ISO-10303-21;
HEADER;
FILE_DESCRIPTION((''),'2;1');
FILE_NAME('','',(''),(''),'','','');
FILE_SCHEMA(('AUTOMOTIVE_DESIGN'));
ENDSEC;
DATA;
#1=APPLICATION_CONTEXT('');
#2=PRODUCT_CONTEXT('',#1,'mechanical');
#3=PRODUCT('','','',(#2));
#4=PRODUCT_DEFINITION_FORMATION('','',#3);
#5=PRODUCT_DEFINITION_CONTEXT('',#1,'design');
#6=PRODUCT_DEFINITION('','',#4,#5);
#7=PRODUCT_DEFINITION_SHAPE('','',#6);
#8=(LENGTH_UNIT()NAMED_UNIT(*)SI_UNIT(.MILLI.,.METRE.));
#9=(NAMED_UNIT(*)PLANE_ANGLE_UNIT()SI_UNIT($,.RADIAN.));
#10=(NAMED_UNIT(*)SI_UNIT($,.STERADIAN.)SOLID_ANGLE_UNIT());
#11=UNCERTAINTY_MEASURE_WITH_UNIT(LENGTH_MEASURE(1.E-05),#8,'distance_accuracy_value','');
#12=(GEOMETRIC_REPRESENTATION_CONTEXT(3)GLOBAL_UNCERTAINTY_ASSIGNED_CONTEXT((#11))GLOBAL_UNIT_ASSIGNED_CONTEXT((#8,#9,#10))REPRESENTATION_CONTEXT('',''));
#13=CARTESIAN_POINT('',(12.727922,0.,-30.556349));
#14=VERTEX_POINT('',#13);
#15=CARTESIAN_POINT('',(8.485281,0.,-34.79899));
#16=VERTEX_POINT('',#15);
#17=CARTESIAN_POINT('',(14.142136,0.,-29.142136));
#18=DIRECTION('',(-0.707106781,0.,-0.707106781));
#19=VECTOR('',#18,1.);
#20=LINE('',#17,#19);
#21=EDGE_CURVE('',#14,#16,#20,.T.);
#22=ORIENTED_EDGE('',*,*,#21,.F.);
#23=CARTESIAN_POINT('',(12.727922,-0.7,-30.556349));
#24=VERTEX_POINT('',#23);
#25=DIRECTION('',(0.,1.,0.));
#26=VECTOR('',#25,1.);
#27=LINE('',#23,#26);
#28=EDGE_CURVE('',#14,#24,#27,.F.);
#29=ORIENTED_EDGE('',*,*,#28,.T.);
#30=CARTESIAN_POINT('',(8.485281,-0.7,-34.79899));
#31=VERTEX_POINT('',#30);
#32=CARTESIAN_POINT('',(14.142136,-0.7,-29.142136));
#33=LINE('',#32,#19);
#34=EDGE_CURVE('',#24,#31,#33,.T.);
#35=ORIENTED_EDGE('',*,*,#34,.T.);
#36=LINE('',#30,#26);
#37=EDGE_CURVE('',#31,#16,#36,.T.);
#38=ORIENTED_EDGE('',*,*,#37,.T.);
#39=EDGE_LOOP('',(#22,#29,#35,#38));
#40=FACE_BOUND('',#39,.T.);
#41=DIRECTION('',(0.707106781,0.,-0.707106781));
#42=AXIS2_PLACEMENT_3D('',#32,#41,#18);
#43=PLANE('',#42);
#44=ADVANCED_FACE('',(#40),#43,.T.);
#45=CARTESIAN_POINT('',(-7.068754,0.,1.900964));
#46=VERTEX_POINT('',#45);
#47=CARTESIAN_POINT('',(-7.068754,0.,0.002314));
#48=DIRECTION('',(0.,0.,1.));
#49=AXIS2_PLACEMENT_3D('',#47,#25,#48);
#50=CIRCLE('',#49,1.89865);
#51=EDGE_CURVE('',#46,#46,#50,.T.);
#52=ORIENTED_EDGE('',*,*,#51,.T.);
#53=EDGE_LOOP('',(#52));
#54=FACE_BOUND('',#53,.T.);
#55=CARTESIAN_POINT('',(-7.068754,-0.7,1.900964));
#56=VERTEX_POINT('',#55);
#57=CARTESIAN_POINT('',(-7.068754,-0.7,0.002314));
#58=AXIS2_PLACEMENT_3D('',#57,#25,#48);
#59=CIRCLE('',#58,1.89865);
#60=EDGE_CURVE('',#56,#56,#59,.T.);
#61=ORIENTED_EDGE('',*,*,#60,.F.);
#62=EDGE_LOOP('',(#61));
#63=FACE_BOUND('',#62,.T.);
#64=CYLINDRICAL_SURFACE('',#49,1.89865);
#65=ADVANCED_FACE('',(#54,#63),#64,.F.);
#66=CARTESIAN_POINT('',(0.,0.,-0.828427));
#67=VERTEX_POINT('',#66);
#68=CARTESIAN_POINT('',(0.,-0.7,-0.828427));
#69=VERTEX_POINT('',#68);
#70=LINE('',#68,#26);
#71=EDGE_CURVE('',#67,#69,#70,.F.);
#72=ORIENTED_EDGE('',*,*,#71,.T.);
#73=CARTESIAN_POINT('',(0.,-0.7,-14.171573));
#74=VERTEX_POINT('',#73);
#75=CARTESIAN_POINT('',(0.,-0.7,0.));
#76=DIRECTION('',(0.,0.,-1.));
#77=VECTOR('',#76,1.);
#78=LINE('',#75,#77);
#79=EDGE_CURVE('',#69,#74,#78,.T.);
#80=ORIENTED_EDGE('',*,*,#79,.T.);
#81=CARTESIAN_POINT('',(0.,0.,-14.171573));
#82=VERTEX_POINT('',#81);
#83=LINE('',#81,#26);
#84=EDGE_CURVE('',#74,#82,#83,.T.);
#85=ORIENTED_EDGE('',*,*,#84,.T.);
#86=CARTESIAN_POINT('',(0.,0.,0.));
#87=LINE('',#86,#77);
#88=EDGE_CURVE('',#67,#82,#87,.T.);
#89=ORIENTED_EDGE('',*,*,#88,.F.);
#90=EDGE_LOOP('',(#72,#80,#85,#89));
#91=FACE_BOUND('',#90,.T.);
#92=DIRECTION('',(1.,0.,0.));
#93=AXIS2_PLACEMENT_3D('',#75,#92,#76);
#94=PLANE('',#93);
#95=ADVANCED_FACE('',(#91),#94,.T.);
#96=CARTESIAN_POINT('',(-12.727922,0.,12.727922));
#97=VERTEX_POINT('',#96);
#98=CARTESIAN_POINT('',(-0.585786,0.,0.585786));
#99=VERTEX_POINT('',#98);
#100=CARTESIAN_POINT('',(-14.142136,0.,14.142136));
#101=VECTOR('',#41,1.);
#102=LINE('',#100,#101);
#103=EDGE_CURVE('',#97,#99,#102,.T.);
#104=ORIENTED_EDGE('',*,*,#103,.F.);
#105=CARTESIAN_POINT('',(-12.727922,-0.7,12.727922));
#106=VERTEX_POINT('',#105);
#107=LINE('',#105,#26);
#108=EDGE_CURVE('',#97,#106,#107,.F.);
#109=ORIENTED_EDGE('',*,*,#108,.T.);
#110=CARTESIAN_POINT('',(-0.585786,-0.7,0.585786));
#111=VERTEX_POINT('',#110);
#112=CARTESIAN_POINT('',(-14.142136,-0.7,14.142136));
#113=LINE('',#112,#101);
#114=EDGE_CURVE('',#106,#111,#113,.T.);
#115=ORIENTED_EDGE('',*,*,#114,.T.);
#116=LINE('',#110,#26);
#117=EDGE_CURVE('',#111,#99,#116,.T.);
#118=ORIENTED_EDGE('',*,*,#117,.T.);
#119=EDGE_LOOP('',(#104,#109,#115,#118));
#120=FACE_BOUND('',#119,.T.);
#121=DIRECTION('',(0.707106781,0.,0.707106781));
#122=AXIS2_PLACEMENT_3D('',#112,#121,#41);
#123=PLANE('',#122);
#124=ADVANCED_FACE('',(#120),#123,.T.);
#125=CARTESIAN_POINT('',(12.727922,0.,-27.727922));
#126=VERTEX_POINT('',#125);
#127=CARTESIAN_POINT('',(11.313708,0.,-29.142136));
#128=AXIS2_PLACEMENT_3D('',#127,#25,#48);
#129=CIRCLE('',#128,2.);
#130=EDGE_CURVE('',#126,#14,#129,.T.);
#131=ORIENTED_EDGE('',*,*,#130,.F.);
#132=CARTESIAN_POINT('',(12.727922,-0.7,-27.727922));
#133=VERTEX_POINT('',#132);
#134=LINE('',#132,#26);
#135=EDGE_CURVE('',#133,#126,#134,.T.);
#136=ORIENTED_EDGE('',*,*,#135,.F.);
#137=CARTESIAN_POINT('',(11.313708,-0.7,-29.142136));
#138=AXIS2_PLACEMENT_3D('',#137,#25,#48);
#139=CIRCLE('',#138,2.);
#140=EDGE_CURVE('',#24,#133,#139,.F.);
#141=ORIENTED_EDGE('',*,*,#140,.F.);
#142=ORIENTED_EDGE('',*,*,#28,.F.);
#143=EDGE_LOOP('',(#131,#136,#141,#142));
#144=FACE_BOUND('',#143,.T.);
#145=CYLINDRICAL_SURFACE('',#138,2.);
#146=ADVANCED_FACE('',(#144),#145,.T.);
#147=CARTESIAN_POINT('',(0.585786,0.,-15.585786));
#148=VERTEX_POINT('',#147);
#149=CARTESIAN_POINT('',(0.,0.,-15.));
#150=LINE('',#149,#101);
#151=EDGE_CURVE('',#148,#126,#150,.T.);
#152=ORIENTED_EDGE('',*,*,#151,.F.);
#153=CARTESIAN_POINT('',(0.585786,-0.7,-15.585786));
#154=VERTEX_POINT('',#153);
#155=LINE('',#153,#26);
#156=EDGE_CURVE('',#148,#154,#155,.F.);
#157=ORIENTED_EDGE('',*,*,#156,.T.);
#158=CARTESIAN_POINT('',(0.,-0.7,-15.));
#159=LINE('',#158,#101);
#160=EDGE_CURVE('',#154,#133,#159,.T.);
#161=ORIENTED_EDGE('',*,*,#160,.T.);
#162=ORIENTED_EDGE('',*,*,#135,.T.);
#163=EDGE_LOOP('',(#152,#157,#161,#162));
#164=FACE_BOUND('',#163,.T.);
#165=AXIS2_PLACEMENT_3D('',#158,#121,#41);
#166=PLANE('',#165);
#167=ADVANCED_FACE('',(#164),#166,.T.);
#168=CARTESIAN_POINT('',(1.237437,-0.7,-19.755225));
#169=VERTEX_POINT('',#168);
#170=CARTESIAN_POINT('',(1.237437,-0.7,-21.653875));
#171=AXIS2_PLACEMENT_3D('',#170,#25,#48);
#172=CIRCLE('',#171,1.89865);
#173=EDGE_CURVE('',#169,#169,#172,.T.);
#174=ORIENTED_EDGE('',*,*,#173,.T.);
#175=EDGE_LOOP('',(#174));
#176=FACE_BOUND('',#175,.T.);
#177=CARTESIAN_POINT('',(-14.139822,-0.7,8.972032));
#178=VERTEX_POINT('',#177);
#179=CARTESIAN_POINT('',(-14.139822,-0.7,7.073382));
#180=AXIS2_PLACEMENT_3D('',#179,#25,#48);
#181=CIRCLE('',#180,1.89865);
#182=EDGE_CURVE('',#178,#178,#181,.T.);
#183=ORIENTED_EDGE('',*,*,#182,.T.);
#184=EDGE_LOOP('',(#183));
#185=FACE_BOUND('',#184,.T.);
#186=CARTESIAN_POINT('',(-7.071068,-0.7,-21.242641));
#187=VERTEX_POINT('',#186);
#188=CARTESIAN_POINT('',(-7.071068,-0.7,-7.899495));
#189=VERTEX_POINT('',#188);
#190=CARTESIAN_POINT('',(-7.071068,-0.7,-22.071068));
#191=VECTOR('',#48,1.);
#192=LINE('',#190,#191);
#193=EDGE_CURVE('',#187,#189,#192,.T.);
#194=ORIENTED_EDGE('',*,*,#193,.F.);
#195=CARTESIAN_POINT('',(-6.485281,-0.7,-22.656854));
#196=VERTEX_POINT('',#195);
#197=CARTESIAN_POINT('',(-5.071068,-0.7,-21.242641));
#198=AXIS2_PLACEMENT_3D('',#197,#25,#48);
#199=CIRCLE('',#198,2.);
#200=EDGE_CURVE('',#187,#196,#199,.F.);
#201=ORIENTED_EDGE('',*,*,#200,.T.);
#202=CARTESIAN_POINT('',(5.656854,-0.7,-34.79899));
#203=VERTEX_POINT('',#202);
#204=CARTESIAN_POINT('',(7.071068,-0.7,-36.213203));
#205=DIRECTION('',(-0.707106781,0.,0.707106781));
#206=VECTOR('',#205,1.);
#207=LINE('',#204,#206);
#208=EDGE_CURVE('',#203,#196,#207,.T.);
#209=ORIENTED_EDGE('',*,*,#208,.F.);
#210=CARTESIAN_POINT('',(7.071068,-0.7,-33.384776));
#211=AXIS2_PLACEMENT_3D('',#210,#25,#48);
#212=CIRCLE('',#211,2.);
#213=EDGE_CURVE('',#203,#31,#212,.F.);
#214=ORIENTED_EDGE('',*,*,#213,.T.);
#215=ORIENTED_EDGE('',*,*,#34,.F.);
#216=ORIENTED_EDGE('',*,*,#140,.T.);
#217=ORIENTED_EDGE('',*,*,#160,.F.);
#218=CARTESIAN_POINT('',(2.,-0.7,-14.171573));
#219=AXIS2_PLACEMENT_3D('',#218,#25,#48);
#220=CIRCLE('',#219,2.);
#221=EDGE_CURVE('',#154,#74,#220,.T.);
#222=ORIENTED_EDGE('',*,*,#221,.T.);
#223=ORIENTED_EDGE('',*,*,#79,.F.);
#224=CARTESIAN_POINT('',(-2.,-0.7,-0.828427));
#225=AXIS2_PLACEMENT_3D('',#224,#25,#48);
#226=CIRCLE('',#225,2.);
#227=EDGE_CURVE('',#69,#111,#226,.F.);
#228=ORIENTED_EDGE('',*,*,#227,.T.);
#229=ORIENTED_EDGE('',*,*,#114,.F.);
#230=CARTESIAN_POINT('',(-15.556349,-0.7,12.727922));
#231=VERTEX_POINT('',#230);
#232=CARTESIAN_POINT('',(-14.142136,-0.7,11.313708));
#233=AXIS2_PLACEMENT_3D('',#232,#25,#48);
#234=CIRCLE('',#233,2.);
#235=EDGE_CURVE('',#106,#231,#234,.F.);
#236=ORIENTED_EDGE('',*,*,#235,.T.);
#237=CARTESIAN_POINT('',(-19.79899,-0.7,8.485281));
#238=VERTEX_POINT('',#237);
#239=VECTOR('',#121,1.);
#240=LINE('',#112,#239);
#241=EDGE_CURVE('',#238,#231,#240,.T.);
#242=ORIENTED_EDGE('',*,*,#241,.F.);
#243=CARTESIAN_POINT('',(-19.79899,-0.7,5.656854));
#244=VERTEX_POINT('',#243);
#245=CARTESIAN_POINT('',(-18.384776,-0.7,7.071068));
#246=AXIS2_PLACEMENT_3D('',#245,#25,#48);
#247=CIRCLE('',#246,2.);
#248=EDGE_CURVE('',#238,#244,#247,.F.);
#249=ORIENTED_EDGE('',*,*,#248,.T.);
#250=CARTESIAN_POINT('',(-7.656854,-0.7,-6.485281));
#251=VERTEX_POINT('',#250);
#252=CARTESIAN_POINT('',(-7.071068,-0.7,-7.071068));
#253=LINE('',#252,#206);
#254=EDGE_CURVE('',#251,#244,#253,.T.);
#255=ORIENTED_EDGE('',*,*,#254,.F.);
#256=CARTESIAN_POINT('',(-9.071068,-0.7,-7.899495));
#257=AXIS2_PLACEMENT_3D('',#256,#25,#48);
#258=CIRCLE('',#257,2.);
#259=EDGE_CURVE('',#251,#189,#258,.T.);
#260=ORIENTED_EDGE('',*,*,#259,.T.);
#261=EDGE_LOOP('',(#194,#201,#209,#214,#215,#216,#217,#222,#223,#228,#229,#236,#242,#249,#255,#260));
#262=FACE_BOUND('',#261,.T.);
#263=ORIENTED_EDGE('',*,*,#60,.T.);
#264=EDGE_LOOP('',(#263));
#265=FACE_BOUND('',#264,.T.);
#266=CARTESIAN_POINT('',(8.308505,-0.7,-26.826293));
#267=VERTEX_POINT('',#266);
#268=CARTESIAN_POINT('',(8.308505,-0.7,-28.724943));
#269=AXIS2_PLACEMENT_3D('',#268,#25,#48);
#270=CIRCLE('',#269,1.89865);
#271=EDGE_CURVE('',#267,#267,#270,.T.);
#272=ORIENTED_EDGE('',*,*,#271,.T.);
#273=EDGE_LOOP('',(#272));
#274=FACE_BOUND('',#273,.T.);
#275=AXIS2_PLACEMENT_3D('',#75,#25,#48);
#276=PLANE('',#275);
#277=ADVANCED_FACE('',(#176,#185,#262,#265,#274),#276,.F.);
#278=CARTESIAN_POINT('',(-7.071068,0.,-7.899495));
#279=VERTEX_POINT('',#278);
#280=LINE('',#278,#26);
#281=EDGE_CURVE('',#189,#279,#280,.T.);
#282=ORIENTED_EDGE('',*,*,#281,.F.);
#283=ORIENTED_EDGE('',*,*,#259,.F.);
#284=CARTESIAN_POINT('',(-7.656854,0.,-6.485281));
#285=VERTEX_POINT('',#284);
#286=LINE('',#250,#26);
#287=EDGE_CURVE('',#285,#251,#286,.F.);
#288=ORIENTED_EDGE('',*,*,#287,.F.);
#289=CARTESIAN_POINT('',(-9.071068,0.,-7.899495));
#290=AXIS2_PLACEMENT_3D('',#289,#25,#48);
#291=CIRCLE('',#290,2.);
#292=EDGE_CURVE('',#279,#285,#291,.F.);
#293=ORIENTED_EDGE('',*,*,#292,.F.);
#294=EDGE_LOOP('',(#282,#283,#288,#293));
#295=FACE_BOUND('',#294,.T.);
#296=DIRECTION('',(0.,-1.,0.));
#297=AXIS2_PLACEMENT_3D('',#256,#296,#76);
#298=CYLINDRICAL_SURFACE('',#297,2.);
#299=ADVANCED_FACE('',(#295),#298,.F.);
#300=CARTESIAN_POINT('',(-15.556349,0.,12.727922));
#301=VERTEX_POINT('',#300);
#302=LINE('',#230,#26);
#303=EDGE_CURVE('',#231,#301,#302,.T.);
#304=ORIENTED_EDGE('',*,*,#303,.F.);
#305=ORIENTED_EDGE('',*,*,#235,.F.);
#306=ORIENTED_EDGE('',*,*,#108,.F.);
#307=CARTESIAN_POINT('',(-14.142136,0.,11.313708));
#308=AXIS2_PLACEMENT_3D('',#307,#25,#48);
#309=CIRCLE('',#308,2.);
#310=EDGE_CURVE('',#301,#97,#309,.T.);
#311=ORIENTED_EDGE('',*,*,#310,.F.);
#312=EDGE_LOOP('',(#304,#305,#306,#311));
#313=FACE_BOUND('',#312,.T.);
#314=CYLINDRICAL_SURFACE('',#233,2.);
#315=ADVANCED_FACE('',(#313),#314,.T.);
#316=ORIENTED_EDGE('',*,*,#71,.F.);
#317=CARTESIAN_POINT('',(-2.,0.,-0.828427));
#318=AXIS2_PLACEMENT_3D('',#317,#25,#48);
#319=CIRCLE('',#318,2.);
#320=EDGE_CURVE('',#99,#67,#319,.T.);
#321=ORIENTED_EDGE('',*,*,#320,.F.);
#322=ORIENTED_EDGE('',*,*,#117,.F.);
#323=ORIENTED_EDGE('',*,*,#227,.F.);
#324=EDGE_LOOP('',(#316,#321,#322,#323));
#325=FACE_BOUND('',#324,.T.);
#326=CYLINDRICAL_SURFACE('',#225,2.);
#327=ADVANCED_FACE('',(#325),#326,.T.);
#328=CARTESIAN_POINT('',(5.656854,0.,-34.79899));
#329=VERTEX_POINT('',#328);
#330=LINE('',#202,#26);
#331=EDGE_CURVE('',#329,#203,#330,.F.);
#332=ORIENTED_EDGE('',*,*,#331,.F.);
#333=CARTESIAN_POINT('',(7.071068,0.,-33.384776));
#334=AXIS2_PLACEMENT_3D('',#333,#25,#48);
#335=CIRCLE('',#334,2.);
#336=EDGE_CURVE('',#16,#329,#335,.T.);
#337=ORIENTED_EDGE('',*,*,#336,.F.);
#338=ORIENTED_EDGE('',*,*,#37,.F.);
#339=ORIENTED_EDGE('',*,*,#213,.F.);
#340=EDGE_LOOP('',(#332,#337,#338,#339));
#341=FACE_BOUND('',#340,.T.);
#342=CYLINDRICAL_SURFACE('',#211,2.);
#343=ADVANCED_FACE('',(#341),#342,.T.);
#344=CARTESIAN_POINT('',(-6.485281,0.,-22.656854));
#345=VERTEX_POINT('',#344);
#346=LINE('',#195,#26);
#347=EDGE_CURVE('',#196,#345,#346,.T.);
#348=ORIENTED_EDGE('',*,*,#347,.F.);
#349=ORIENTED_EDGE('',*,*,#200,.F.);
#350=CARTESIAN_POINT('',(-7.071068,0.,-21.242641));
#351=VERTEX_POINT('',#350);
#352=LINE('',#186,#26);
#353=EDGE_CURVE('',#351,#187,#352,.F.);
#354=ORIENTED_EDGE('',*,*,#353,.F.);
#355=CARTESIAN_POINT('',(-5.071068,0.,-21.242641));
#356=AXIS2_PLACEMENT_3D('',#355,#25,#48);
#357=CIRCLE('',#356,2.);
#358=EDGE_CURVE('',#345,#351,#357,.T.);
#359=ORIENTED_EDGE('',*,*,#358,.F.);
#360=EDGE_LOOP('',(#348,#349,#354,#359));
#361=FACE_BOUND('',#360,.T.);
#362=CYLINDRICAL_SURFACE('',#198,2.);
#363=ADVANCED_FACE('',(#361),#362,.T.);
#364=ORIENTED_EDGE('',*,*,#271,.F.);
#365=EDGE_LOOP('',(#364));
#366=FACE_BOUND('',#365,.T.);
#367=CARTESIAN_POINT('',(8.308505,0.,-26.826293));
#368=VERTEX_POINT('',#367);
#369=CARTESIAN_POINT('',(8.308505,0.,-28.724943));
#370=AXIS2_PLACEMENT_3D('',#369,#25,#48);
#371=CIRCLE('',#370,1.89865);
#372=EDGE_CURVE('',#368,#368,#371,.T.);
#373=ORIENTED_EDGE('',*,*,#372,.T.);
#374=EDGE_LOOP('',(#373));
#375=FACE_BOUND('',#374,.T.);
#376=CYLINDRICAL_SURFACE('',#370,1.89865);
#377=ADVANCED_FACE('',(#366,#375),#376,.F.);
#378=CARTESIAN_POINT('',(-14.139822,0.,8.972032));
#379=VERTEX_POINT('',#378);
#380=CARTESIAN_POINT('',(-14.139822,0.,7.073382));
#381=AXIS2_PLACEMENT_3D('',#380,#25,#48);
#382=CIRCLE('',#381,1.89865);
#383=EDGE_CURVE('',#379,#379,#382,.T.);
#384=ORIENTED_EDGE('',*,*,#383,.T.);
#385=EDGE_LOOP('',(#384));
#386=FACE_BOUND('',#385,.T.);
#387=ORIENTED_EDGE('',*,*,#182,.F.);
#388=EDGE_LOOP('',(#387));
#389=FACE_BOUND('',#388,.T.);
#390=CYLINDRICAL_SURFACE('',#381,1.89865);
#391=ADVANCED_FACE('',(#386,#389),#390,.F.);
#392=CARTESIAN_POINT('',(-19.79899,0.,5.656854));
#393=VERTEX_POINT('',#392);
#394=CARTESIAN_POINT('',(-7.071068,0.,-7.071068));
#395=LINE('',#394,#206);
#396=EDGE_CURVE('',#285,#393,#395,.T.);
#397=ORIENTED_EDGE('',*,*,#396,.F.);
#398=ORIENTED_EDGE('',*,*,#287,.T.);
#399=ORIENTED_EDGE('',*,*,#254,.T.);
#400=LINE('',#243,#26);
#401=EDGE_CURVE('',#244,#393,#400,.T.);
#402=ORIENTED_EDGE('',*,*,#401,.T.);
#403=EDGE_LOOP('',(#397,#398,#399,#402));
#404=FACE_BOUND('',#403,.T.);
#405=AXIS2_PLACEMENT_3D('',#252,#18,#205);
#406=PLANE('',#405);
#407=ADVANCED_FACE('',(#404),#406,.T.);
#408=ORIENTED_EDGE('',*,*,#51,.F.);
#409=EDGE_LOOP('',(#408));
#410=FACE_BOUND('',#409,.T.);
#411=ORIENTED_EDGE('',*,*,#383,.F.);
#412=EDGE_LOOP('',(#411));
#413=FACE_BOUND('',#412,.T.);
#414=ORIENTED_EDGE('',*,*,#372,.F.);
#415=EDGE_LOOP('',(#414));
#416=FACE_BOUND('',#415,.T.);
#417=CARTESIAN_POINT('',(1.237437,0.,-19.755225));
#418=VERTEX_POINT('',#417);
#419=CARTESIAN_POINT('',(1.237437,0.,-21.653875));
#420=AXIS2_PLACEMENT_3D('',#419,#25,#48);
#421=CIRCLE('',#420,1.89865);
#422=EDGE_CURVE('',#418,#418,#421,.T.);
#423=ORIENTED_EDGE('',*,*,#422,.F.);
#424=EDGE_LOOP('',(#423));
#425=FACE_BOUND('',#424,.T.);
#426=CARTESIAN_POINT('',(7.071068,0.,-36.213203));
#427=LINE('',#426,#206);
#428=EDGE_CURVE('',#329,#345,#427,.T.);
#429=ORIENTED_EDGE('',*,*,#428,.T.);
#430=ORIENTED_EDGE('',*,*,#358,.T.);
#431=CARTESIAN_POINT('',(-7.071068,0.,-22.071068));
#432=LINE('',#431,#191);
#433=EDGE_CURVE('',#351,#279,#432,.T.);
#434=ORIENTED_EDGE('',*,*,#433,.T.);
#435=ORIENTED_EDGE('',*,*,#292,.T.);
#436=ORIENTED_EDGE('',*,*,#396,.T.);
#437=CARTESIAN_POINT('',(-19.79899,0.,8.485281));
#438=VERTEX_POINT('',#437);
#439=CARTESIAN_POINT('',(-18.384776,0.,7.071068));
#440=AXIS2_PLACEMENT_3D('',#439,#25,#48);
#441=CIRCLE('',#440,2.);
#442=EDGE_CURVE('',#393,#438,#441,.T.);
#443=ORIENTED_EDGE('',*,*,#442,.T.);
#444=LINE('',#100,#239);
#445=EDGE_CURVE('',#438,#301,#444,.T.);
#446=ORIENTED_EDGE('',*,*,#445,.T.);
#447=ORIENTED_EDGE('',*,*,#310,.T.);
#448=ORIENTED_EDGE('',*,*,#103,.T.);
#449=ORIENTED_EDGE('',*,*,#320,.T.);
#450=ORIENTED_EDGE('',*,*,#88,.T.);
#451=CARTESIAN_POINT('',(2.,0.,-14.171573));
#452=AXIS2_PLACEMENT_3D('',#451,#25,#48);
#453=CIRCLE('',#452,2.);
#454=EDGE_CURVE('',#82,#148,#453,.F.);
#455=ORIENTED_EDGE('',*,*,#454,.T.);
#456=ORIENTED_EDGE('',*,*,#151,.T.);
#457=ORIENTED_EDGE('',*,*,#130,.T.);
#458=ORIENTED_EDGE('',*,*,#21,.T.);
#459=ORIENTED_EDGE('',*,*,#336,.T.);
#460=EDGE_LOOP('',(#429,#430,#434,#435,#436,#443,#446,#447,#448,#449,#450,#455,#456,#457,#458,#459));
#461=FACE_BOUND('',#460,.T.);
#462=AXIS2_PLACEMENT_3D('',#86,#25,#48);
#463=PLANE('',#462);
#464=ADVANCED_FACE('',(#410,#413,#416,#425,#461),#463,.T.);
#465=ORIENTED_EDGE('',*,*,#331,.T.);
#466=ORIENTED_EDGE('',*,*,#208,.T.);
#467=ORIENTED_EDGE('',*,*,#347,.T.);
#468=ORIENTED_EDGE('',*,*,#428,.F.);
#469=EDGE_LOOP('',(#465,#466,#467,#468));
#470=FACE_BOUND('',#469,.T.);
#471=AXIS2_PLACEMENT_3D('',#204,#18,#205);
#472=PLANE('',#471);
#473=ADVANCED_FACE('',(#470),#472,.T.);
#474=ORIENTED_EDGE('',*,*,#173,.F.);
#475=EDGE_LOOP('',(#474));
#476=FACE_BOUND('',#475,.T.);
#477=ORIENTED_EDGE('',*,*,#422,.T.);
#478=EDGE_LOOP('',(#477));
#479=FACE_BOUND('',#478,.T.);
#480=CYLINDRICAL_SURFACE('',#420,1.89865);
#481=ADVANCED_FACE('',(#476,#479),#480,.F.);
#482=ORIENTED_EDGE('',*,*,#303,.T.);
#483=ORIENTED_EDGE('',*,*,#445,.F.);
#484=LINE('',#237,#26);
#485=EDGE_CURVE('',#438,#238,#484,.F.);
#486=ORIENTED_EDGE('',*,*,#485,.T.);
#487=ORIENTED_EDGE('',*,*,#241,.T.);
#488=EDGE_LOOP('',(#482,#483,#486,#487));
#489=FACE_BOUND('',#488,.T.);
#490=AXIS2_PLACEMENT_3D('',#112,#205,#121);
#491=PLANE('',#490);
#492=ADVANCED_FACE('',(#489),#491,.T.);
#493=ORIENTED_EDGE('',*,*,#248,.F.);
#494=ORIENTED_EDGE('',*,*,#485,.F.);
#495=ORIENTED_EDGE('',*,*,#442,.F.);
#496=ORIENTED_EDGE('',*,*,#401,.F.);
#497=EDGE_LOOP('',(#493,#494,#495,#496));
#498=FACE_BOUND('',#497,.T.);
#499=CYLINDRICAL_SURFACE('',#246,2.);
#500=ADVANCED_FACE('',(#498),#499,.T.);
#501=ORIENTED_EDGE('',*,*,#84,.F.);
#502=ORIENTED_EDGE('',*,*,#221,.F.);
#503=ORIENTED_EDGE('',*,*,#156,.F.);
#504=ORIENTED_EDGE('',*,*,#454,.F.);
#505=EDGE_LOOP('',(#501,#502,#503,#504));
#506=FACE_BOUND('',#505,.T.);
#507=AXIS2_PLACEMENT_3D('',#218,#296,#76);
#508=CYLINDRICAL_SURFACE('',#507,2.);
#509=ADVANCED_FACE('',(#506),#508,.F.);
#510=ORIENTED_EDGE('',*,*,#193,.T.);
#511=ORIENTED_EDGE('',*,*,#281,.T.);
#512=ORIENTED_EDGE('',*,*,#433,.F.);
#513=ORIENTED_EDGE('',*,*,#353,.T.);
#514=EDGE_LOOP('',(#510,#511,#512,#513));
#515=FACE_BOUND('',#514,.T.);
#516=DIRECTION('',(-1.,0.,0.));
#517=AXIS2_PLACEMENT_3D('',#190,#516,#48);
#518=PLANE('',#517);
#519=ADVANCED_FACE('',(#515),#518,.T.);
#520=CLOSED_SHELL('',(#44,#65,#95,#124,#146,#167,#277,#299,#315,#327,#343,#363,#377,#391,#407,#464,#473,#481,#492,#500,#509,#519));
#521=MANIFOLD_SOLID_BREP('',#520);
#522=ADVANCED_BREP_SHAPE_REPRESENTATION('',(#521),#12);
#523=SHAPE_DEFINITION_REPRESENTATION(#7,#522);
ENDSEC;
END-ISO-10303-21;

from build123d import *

# Parameters (mm, degrees)
BASE_FLANGE2_DEPTH    = 0.7
F_6_CLEARANCE_HOLE1_D = 3.7973
FILLET1_R             = 2


# Sheet-metal steps are written as plain solids
with BuildPart() as part:
    # Sketch1 → Base-Flange2 (new body)
    with BuildSketch(Plane(origin=(0, 0, 0), x_dir=(1, 0, 0), z_dir=(0, 1, 0))):
        Polygon((0, 0), (0, 15), (14.142135624, 29.142135624), (7.071067812, 36.213203436), (-7.071067812, 22.071067812), (-7.071067812, 7.071067812), (-21.213203436, -7.071067812), (-14.142135624, -14.142135624), align=None)
    extrude(amount=-BASE_FLANGE2_DEPTH)

    # #6 Clearance Hole1 (through all)
    with Locations(Plane(origin=(0, 0, 0), x_dir=(1, 0, 0), z_dir=(0, 1, 0))):
        with Locations((-14.139821541, -7.073381895), (-7.068753729, -0.002314083), (1.237436867, 21.653874811), (8.308504679, 28.724942623)):
            Hole(F_6_CLEARANCE_HOLE1_D / 2)

    # Fillet1
    fillet1_edges = [part.edges().sort_by_distance(p)[0] for p in [
        (-14.142135624, -0.35, 14.142135624),
        (-21.213203436, -0.35, 7.071067812),
        (-7.071067812, -0.35, -7.071067812),
        (-7.071067812, -0.35, -22.071067812),
        (7.071067812, -0.35, -36.213203436),
        (14.142135624, -0.35, -29.142135624),
        (0, -0.35, -15),
        (0, -0.35, 0),
    ]]
    fillet(fillet1_edges, radius=FILLET1_R)


solid = part.part
